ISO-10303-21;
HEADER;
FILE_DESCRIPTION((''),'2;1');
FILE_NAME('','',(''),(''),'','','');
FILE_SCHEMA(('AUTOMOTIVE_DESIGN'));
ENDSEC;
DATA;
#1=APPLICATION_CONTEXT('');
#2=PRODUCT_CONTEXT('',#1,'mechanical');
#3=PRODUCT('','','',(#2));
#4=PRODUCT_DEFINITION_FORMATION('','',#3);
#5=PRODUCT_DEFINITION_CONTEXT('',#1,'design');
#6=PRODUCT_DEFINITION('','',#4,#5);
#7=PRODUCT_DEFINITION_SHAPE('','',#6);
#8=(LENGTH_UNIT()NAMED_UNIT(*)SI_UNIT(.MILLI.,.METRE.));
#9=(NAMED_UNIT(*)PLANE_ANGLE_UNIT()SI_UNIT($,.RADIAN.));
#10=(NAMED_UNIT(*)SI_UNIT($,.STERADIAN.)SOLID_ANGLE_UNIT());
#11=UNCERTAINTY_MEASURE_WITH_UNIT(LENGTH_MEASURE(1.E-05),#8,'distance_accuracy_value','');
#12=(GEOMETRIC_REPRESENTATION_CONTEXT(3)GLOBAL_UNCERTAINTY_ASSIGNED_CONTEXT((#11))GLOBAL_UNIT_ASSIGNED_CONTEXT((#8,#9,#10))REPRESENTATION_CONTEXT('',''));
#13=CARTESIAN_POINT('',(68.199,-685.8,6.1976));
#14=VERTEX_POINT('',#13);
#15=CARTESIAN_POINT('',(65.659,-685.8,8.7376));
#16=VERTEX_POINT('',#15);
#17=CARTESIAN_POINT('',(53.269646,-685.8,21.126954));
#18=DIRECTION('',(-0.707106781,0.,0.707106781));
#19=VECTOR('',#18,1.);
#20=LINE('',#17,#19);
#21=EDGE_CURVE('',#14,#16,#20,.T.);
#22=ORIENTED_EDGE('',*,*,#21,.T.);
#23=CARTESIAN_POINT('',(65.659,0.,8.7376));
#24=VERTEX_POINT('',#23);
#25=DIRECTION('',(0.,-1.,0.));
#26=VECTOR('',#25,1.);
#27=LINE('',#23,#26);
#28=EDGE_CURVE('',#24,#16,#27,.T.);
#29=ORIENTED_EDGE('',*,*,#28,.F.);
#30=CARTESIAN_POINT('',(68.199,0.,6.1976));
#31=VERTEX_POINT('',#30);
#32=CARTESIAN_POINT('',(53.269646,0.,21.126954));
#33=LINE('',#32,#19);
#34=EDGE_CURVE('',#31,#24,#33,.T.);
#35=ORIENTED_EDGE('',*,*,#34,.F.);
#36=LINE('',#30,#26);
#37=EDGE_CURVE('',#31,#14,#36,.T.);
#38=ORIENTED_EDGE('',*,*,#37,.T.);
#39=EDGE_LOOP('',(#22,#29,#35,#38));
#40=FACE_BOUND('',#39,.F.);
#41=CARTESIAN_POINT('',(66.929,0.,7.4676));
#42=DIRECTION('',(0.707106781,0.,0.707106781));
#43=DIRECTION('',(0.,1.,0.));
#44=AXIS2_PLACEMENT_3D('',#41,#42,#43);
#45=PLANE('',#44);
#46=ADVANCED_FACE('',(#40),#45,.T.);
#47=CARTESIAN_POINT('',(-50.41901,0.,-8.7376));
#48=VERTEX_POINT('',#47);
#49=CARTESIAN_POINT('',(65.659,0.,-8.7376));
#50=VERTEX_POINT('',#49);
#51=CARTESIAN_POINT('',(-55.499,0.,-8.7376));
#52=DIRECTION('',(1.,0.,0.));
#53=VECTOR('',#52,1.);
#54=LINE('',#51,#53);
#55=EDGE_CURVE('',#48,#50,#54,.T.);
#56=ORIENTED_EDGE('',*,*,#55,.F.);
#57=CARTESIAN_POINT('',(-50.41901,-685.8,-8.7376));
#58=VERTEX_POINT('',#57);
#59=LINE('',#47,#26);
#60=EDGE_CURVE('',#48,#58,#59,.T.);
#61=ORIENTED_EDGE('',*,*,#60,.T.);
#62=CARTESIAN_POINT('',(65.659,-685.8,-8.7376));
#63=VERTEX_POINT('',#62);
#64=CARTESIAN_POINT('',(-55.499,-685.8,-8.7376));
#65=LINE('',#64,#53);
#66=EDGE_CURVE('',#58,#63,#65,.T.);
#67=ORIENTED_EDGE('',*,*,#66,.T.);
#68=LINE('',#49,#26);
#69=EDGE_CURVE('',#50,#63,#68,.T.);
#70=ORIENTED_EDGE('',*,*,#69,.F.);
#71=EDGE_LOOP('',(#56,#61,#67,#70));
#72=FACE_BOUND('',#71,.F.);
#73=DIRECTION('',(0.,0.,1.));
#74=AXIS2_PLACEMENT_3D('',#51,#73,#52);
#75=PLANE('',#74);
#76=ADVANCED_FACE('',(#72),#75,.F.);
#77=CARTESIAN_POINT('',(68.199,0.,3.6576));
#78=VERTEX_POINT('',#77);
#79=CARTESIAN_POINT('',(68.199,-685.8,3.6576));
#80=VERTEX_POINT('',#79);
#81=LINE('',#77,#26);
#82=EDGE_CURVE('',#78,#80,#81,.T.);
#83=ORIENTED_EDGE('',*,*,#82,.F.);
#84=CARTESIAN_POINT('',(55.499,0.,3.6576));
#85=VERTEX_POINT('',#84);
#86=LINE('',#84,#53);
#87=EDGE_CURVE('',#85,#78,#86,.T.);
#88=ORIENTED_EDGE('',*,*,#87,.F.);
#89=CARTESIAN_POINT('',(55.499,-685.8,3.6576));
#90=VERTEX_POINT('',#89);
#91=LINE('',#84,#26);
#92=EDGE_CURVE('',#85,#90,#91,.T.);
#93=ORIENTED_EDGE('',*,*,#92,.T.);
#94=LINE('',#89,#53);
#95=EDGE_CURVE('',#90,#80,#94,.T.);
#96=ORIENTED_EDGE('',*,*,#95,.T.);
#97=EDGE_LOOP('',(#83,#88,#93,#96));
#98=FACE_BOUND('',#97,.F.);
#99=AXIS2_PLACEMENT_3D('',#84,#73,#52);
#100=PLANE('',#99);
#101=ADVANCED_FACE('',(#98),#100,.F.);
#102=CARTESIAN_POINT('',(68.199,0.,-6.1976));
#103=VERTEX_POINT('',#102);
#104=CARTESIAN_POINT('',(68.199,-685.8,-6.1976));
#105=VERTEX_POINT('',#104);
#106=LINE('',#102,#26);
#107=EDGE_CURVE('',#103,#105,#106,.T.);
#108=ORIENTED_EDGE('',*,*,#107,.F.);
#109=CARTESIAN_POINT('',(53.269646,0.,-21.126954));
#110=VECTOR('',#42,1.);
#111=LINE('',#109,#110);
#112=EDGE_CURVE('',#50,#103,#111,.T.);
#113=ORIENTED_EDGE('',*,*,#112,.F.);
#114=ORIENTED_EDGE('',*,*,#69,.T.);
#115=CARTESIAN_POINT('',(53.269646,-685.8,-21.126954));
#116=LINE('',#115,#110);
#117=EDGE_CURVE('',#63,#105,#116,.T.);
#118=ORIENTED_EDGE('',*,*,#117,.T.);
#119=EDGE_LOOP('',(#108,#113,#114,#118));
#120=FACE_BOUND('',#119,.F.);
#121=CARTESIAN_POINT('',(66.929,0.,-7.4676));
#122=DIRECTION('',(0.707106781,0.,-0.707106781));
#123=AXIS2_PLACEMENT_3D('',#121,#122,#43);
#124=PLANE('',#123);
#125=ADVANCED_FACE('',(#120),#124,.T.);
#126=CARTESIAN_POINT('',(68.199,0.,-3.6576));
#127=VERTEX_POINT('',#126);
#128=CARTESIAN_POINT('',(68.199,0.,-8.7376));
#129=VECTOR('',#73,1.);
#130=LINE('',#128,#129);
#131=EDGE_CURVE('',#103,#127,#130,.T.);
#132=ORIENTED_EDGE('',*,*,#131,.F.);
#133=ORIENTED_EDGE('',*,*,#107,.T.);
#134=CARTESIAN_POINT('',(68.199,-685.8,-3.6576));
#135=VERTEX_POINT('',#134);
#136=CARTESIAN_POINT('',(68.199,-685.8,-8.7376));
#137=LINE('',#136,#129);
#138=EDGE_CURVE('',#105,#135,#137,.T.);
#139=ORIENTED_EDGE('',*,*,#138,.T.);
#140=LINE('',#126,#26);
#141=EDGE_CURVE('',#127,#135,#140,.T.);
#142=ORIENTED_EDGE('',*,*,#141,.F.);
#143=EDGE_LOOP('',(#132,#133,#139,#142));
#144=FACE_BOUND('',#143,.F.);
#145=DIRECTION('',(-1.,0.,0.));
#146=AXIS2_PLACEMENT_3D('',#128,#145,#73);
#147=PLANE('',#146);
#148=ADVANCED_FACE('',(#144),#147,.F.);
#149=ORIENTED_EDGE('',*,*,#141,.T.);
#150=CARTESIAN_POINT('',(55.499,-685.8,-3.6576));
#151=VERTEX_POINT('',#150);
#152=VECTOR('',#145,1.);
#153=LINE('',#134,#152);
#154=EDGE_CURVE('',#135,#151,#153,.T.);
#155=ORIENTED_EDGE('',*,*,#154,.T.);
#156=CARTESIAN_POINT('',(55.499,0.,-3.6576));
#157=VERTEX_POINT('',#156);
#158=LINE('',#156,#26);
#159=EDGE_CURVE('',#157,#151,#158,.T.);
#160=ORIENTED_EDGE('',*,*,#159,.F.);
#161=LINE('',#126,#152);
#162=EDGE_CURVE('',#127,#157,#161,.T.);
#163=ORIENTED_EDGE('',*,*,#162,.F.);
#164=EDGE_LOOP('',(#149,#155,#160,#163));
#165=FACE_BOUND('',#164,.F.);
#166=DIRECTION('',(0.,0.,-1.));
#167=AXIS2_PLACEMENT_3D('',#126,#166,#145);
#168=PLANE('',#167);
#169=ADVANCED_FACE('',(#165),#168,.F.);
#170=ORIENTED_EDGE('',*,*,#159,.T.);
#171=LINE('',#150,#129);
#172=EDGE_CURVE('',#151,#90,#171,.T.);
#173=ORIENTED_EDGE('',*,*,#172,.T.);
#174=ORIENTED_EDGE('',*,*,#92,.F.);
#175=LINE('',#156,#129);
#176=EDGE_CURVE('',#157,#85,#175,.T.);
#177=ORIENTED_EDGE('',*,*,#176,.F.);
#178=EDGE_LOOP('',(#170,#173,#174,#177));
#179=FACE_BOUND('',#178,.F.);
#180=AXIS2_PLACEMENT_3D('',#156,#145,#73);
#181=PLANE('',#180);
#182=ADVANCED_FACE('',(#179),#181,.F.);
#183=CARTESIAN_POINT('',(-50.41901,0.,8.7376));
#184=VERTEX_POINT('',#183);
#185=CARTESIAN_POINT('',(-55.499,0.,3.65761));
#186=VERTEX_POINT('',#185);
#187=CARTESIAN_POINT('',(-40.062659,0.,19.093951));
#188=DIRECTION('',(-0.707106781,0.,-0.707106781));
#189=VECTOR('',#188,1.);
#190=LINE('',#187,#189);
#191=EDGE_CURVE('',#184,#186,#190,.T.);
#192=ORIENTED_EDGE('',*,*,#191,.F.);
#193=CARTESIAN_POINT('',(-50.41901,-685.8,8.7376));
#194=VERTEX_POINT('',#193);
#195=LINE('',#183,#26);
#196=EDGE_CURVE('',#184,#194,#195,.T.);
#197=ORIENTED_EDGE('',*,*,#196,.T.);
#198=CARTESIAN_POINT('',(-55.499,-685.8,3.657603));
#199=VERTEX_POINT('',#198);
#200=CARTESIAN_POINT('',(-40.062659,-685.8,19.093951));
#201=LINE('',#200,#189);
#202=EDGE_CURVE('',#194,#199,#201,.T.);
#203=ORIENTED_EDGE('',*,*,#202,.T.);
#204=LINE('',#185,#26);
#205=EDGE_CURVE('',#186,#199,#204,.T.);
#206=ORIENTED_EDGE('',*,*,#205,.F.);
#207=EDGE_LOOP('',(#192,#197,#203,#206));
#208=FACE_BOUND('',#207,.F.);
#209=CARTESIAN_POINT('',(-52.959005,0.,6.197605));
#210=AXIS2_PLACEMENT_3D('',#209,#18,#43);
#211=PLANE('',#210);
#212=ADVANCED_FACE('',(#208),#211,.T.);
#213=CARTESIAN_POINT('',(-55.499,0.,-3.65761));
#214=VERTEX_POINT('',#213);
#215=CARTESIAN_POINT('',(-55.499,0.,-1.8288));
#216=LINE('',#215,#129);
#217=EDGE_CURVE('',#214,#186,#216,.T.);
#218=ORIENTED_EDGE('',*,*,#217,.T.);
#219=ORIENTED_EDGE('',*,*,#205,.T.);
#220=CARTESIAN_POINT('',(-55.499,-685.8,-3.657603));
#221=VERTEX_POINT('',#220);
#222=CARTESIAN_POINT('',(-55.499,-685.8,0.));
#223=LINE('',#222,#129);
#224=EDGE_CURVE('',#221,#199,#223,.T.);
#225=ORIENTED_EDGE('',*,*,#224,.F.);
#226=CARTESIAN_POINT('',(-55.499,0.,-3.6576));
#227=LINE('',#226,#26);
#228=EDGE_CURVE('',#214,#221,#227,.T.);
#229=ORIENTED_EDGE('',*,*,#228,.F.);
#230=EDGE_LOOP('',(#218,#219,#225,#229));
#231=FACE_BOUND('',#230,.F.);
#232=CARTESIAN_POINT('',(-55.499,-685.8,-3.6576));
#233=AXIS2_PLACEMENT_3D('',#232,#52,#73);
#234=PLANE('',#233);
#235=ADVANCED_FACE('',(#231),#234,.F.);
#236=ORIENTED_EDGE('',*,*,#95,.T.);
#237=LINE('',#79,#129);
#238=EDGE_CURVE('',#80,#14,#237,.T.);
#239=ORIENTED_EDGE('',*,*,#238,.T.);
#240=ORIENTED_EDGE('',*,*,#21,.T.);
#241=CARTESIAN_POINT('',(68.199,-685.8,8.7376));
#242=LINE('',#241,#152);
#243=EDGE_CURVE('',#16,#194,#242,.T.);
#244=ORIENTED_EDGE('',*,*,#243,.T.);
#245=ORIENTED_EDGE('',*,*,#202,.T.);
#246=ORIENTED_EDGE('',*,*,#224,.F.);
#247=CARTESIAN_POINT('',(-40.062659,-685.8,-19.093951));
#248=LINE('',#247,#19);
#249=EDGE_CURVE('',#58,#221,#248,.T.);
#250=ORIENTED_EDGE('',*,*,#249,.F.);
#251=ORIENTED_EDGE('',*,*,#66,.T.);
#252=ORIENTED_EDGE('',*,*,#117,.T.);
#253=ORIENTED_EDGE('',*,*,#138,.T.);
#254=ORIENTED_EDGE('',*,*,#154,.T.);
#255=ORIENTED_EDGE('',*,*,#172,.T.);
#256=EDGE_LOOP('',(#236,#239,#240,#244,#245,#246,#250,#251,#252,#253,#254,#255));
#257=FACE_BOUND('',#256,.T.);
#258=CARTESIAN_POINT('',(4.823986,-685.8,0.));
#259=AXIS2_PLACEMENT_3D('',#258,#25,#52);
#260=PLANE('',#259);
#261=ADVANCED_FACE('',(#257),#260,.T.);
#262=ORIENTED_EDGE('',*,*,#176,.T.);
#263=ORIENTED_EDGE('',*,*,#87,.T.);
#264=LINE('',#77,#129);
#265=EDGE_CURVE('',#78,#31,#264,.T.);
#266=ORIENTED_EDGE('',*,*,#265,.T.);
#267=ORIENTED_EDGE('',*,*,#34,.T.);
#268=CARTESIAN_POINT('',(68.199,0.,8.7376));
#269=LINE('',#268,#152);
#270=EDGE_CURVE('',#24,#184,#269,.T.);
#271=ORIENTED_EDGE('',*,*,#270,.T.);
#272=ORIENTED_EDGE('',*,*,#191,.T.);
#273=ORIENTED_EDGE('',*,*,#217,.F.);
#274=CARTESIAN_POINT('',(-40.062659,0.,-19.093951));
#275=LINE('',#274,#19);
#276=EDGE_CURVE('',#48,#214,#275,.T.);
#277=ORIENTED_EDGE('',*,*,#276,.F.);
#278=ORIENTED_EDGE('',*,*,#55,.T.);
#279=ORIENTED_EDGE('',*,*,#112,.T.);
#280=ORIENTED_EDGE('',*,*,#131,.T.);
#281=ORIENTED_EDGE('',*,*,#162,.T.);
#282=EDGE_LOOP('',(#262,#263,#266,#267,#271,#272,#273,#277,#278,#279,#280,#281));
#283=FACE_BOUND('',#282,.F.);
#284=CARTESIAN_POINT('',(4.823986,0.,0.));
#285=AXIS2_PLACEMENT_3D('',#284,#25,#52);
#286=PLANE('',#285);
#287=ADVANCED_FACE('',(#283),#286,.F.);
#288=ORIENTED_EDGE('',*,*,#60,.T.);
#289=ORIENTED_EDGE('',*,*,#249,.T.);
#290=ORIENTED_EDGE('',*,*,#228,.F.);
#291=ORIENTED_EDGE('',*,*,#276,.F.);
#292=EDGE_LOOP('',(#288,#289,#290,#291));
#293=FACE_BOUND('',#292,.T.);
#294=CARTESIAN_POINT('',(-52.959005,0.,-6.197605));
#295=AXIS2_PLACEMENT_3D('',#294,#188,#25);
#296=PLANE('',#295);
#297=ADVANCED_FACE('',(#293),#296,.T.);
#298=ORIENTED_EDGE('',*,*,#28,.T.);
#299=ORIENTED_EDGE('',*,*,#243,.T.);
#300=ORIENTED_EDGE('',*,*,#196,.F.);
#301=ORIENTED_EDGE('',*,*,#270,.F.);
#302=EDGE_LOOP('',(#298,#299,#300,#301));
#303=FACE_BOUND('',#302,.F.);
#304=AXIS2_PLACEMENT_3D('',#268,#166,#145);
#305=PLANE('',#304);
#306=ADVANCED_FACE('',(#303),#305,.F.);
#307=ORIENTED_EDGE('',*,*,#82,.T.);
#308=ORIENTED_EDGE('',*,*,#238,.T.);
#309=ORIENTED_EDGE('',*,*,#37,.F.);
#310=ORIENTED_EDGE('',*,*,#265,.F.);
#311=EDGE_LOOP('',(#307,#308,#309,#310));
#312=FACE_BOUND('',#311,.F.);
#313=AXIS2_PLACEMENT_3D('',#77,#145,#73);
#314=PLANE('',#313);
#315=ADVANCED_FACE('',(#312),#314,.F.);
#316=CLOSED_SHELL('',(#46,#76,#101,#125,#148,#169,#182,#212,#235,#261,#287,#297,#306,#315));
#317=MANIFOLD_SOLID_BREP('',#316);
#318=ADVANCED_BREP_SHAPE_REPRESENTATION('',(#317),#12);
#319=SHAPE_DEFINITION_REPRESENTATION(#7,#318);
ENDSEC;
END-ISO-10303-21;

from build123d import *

# Parameters (mm, degrees)
F1_DEPTH = 685.8
F2_SIZE  = 2.54
F3_SIZE  = 5.07999
F4_W     = 25.4
F4_H     = 7.3152
F5_DEPTH = 685.801


# Not quite as in the source:
# - a fillet or chamfer is up to 0.001 mm smaller than in the source, because OpenCascade refuses the exact size


with BuildPart() as f1:
    # F0 (on Front) → F1 (new body)
    with BuildSketch(Plane.XZ):
        Polygon((68.199, 3.6576), (68.199, 8.7376), (-55.499, 8.7376), (-55.499, 3.6576), (-68.199, 3.6576), (-68.199, -3.6576), (-55.499, -3.6576), (-55.499, -8.7376), (68.199, -8.7376), (68.199, -3.6576), (55.499, -3.6576), (55.499, 3.6576), align=None)
    extrude(amount=F1_DEPTH)

    # F2
    f2_edges = [f1.edges().sort_by_distance(p)[0] for p in [
        (68.199, -342.9, 8.7376),
        (68.199, -342.9, -8.7376),
        (-68.199, -342.9, 3.6576),
        (-68.199, -342.9, -3.6576),
    ]]
    chamfer(f2_edges, length=F2_SIZE)

    # F3 (size 5.08 in the source; OpenCascade refuses exactly that, so slightly less here)
    f3_edges = [f1.edges().sort_by_distance(p)[0] for p in [
        (-55.499, -342.9, 8.7376),
        (-55.499, -342.9, -8.7376),
    ]]
    chamfer(f3_edges, length=F3_SIZE)

    # F4 (on face) → F5 (cut, through all)
    with BuildSketch(Plane.XZ.offset(685.8)):
        with Locations((-68.199, 0)):
            Rectangle(F4_W, F4_H)
    extrude(amount=-F5_DEPTH, mode=Mode.SUBTRACT)


solid = f1.part
